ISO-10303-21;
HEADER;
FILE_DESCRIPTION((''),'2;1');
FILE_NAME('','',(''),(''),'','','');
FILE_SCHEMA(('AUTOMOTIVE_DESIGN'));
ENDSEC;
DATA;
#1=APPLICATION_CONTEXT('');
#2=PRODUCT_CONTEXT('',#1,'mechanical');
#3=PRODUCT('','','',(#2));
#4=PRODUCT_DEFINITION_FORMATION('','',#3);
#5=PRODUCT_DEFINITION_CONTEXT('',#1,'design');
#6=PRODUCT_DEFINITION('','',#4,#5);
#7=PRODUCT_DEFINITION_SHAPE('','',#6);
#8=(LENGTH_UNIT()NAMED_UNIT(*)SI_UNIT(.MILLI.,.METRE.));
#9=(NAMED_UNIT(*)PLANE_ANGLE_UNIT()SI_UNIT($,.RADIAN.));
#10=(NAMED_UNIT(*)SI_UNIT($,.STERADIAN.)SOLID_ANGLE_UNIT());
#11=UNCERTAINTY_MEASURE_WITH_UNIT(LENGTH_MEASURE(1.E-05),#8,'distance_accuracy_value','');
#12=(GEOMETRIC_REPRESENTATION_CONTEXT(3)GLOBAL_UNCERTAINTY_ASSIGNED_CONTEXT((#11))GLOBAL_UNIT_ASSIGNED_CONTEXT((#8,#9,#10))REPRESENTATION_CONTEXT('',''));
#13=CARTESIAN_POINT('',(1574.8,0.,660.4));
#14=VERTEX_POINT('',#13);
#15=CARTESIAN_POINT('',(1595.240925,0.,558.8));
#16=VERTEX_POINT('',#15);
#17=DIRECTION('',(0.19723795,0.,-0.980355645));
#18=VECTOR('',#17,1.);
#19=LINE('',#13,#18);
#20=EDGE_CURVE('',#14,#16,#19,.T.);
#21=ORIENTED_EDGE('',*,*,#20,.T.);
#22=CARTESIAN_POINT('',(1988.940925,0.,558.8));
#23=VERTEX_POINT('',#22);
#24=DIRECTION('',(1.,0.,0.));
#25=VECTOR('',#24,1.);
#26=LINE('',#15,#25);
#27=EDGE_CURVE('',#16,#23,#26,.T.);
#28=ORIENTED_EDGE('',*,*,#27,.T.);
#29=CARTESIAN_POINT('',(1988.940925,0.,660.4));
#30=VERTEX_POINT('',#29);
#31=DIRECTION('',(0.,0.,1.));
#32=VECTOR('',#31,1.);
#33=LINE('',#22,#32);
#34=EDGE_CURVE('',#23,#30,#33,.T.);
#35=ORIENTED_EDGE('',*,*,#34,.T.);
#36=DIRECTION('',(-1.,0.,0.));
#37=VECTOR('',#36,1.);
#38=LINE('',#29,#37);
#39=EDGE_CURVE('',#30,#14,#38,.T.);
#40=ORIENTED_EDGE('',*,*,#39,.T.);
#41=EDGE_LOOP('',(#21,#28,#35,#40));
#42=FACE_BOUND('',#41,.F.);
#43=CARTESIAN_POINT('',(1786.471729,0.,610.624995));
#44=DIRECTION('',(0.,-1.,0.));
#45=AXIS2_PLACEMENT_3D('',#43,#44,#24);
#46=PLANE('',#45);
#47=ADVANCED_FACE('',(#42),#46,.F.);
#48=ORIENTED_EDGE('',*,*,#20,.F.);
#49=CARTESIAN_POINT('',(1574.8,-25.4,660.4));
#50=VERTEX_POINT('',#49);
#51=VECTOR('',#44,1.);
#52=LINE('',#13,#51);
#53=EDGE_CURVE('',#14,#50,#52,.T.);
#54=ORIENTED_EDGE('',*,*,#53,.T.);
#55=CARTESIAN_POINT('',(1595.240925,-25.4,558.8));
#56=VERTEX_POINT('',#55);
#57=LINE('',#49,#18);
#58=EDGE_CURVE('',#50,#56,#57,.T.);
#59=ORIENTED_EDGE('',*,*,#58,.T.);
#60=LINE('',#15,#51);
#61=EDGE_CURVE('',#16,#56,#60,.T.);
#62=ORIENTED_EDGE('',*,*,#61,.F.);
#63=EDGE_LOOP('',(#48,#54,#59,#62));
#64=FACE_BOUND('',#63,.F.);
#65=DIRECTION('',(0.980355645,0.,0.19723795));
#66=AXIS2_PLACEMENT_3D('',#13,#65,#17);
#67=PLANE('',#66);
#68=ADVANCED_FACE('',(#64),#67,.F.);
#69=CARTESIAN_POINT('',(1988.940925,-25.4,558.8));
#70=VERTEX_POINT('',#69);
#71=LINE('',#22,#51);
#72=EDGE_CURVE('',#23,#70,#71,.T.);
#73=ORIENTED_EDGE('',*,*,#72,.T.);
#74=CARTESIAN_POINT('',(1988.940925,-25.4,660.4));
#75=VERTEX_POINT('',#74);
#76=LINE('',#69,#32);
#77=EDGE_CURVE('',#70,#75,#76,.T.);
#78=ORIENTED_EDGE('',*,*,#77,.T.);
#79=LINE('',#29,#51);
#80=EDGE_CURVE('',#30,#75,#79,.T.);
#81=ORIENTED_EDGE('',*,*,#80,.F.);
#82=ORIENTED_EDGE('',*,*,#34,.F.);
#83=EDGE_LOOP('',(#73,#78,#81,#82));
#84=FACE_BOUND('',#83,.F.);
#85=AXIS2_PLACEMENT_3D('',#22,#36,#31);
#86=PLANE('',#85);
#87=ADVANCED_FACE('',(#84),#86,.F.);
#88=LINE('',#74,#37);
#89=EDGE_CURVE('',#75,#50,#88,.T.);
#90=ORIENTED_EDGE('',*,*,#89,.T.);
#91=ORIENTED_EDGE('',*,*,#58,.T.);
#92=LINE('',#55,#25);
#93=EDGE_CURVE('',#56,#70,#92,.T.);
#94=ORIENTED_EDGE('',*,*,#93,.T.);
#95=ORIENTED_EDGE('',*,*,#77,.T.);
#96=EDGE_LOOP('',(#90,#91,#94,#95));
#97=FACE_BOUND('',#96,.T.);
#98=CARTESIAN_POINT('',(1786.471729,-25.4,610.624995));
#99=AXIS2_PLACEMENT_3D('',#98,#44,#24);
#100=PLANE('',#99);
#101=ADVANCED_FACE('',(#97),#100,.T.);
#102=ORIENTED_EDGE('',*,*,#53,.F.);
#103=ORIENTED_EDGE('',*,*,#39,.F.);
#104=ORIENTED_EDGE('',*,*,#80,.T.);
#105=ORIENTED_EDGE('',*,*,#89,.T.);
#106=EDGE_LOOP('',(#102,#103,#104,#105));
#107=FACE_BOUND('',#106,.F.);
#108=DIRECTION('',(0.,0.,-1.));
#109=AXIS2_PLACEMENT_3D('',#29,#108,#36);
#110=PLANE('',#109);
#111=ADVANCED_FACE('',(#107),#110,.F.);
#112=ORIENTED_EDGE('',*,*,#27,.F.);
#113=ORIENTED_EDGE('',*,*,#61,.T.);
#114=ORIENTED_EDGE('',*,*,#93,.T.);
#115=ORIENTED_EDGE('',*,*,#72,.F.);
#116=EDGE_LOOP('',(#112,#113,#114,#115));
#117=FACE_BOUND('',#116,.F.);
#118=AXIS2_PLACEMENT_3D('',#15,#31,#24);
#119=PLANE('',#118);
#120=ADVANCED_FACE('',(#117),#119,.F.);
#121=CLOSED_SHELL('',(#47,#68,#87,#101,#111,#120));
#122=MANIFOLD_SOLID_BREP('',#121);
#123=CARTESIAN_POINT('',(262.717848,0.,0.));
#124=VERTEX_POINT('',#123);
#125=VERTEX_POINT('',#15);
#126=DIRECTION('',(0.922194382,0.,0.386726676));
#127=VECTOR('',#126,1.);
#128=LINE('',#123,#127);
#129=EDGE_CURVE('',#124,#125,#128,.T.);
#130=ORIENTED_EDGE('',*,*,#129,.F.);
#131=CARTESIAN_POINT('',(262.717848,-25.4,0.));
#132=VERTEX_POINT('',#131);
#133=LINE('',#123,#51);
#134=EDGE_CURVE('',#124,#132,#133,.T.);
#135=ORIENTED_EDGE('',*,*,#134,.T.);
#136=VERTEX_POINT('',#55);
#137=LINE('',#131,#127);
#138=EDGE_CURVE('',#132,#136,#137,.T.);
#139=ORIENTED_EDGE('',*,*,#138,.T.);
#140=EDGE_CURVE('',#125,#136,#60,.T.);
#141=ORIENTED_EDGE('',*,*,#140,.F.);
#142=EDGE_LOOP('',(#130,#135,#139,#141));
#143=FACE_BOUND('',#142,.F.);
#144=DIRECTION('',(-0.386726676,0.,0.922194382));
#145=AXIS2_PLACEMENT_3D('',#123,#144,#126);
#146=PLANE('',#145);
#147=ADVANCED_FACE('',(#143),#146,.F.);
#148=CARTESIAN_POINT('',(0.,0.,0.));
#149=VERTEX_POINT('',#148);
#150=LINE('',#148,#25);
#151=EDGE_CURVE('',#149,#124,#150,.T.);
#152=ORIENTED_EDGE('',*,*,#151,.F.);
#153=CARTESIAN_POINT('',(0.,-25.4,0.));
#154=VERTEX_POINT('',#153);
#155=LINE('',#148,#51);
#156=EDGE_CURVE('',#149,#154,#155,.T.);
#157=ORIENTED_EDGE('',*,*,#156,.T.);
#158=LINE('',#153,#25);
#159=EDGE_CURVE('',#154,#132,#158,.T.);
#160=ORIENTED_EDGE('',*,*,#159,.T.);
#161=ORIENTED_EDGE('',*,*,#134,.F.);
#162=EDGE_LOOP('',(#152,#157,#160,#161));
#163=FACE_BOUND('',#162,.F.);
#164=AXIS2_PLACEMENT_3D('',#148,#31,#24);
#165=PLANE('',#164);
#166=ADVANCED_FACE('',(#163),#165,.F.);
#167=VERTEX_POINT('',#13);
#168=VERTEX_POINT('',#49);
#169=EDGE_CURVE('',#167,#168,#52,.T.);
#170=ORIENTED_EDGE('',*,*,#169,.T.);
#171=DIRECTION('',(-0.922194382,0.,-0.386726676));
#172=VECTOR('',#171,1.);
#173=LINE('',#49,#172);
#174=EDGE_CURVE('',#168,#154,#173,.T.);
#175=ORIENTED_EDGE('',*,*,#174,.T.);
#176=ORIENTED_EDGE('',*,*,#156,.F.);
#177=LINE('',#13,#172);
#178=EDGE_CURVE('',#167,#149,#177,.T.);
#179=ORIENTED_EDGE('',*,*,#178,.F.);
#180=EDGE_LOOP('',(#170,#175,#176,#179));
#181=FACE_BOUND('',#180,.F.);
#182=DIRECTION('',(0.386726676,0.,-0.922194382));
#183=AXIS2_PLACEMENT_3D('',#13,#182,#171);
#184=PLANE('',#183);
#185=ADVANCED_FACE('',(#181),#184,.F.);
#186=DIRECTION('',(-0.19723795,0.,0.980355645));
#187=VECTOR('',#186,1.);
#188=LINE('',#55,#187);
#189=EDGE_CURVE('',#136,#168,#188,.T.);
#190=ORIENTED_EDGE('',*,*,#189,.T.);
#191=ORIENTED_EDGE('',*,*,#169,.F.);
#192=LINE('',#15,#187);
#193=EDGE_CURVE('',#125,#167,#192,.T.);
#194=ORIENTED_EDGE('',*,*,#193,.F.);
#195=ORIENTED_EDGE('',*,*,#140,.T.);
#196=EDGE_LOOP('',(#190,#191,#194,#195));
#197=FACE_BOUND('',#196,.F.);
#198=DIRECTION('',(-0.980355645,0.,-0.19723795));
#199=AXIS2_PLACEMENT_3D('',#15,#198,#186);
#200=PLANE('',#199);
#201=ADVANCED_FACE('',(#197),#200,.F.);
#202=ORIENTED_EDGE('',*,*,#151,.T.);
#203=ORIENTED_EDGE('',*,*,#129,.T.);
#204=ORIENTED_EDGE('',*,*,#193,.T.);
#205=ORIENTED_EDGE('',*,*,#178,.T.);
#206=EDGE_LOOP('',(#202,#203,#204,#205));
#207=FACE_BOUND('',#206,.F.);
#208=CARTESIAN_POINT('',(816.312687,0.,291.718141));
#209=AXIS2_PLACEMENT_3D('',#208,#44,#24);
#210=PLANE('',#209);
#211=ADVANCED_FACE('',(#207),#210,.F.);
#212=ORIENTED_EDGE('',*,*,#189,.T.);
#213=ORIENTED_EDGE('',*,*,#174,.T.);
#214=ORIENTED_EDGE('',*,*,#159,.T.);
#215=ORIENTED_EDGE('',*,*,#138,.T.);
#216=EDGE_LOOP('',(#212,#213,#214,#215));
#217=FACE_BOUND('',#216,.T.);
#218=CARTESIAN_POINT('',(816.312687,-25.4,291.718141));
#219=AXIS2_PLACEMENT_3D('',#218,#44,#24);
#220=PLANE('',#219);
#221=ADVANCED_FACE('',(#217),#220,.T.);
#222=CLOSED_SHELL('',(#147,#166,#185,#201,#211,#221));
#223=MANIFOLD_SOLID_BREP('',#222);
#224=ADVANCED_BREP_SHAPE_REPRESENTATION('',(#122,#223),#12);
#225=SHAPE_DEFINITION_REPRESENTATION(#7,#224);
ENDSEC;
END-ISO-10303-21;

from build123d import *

# Parameters (mm, degrees)
F1_DEPTH = 25.4
F2_DEPTH = 25.4


# Not quite as in the source:
# - a feature names something its author has since deleted; it is built from what else it names


with BuildPart() as f1:
    # F0 (on Front) → F1 (new body)
    with BuildSketch(Plane.XZ):
        Polygon((1574.8, 660.4), (0, 0), (262.7178476153, 0), (1574.8, 550.2279993871), align=None)
        Polygon((1595.2409245384, 558.8), (1574.8, 660.4), (1574.8, 550.2279993871), align=None)
    extrude(amount=F1_DEPTH)


with BuildPart() as f2:
    # F0 (on Front) → F2 (new body)
    with BuildSketch(Plane.XZ):
        Polygon((1988.9409245384, 660.4), (1574.8, 660.4), (1595.2409245384, 558.8), (1988.9409245384, 558.8), align=None)
    extrude(amount=F2_DEPTH)


solid = Compound([f1.part, f2.part])
